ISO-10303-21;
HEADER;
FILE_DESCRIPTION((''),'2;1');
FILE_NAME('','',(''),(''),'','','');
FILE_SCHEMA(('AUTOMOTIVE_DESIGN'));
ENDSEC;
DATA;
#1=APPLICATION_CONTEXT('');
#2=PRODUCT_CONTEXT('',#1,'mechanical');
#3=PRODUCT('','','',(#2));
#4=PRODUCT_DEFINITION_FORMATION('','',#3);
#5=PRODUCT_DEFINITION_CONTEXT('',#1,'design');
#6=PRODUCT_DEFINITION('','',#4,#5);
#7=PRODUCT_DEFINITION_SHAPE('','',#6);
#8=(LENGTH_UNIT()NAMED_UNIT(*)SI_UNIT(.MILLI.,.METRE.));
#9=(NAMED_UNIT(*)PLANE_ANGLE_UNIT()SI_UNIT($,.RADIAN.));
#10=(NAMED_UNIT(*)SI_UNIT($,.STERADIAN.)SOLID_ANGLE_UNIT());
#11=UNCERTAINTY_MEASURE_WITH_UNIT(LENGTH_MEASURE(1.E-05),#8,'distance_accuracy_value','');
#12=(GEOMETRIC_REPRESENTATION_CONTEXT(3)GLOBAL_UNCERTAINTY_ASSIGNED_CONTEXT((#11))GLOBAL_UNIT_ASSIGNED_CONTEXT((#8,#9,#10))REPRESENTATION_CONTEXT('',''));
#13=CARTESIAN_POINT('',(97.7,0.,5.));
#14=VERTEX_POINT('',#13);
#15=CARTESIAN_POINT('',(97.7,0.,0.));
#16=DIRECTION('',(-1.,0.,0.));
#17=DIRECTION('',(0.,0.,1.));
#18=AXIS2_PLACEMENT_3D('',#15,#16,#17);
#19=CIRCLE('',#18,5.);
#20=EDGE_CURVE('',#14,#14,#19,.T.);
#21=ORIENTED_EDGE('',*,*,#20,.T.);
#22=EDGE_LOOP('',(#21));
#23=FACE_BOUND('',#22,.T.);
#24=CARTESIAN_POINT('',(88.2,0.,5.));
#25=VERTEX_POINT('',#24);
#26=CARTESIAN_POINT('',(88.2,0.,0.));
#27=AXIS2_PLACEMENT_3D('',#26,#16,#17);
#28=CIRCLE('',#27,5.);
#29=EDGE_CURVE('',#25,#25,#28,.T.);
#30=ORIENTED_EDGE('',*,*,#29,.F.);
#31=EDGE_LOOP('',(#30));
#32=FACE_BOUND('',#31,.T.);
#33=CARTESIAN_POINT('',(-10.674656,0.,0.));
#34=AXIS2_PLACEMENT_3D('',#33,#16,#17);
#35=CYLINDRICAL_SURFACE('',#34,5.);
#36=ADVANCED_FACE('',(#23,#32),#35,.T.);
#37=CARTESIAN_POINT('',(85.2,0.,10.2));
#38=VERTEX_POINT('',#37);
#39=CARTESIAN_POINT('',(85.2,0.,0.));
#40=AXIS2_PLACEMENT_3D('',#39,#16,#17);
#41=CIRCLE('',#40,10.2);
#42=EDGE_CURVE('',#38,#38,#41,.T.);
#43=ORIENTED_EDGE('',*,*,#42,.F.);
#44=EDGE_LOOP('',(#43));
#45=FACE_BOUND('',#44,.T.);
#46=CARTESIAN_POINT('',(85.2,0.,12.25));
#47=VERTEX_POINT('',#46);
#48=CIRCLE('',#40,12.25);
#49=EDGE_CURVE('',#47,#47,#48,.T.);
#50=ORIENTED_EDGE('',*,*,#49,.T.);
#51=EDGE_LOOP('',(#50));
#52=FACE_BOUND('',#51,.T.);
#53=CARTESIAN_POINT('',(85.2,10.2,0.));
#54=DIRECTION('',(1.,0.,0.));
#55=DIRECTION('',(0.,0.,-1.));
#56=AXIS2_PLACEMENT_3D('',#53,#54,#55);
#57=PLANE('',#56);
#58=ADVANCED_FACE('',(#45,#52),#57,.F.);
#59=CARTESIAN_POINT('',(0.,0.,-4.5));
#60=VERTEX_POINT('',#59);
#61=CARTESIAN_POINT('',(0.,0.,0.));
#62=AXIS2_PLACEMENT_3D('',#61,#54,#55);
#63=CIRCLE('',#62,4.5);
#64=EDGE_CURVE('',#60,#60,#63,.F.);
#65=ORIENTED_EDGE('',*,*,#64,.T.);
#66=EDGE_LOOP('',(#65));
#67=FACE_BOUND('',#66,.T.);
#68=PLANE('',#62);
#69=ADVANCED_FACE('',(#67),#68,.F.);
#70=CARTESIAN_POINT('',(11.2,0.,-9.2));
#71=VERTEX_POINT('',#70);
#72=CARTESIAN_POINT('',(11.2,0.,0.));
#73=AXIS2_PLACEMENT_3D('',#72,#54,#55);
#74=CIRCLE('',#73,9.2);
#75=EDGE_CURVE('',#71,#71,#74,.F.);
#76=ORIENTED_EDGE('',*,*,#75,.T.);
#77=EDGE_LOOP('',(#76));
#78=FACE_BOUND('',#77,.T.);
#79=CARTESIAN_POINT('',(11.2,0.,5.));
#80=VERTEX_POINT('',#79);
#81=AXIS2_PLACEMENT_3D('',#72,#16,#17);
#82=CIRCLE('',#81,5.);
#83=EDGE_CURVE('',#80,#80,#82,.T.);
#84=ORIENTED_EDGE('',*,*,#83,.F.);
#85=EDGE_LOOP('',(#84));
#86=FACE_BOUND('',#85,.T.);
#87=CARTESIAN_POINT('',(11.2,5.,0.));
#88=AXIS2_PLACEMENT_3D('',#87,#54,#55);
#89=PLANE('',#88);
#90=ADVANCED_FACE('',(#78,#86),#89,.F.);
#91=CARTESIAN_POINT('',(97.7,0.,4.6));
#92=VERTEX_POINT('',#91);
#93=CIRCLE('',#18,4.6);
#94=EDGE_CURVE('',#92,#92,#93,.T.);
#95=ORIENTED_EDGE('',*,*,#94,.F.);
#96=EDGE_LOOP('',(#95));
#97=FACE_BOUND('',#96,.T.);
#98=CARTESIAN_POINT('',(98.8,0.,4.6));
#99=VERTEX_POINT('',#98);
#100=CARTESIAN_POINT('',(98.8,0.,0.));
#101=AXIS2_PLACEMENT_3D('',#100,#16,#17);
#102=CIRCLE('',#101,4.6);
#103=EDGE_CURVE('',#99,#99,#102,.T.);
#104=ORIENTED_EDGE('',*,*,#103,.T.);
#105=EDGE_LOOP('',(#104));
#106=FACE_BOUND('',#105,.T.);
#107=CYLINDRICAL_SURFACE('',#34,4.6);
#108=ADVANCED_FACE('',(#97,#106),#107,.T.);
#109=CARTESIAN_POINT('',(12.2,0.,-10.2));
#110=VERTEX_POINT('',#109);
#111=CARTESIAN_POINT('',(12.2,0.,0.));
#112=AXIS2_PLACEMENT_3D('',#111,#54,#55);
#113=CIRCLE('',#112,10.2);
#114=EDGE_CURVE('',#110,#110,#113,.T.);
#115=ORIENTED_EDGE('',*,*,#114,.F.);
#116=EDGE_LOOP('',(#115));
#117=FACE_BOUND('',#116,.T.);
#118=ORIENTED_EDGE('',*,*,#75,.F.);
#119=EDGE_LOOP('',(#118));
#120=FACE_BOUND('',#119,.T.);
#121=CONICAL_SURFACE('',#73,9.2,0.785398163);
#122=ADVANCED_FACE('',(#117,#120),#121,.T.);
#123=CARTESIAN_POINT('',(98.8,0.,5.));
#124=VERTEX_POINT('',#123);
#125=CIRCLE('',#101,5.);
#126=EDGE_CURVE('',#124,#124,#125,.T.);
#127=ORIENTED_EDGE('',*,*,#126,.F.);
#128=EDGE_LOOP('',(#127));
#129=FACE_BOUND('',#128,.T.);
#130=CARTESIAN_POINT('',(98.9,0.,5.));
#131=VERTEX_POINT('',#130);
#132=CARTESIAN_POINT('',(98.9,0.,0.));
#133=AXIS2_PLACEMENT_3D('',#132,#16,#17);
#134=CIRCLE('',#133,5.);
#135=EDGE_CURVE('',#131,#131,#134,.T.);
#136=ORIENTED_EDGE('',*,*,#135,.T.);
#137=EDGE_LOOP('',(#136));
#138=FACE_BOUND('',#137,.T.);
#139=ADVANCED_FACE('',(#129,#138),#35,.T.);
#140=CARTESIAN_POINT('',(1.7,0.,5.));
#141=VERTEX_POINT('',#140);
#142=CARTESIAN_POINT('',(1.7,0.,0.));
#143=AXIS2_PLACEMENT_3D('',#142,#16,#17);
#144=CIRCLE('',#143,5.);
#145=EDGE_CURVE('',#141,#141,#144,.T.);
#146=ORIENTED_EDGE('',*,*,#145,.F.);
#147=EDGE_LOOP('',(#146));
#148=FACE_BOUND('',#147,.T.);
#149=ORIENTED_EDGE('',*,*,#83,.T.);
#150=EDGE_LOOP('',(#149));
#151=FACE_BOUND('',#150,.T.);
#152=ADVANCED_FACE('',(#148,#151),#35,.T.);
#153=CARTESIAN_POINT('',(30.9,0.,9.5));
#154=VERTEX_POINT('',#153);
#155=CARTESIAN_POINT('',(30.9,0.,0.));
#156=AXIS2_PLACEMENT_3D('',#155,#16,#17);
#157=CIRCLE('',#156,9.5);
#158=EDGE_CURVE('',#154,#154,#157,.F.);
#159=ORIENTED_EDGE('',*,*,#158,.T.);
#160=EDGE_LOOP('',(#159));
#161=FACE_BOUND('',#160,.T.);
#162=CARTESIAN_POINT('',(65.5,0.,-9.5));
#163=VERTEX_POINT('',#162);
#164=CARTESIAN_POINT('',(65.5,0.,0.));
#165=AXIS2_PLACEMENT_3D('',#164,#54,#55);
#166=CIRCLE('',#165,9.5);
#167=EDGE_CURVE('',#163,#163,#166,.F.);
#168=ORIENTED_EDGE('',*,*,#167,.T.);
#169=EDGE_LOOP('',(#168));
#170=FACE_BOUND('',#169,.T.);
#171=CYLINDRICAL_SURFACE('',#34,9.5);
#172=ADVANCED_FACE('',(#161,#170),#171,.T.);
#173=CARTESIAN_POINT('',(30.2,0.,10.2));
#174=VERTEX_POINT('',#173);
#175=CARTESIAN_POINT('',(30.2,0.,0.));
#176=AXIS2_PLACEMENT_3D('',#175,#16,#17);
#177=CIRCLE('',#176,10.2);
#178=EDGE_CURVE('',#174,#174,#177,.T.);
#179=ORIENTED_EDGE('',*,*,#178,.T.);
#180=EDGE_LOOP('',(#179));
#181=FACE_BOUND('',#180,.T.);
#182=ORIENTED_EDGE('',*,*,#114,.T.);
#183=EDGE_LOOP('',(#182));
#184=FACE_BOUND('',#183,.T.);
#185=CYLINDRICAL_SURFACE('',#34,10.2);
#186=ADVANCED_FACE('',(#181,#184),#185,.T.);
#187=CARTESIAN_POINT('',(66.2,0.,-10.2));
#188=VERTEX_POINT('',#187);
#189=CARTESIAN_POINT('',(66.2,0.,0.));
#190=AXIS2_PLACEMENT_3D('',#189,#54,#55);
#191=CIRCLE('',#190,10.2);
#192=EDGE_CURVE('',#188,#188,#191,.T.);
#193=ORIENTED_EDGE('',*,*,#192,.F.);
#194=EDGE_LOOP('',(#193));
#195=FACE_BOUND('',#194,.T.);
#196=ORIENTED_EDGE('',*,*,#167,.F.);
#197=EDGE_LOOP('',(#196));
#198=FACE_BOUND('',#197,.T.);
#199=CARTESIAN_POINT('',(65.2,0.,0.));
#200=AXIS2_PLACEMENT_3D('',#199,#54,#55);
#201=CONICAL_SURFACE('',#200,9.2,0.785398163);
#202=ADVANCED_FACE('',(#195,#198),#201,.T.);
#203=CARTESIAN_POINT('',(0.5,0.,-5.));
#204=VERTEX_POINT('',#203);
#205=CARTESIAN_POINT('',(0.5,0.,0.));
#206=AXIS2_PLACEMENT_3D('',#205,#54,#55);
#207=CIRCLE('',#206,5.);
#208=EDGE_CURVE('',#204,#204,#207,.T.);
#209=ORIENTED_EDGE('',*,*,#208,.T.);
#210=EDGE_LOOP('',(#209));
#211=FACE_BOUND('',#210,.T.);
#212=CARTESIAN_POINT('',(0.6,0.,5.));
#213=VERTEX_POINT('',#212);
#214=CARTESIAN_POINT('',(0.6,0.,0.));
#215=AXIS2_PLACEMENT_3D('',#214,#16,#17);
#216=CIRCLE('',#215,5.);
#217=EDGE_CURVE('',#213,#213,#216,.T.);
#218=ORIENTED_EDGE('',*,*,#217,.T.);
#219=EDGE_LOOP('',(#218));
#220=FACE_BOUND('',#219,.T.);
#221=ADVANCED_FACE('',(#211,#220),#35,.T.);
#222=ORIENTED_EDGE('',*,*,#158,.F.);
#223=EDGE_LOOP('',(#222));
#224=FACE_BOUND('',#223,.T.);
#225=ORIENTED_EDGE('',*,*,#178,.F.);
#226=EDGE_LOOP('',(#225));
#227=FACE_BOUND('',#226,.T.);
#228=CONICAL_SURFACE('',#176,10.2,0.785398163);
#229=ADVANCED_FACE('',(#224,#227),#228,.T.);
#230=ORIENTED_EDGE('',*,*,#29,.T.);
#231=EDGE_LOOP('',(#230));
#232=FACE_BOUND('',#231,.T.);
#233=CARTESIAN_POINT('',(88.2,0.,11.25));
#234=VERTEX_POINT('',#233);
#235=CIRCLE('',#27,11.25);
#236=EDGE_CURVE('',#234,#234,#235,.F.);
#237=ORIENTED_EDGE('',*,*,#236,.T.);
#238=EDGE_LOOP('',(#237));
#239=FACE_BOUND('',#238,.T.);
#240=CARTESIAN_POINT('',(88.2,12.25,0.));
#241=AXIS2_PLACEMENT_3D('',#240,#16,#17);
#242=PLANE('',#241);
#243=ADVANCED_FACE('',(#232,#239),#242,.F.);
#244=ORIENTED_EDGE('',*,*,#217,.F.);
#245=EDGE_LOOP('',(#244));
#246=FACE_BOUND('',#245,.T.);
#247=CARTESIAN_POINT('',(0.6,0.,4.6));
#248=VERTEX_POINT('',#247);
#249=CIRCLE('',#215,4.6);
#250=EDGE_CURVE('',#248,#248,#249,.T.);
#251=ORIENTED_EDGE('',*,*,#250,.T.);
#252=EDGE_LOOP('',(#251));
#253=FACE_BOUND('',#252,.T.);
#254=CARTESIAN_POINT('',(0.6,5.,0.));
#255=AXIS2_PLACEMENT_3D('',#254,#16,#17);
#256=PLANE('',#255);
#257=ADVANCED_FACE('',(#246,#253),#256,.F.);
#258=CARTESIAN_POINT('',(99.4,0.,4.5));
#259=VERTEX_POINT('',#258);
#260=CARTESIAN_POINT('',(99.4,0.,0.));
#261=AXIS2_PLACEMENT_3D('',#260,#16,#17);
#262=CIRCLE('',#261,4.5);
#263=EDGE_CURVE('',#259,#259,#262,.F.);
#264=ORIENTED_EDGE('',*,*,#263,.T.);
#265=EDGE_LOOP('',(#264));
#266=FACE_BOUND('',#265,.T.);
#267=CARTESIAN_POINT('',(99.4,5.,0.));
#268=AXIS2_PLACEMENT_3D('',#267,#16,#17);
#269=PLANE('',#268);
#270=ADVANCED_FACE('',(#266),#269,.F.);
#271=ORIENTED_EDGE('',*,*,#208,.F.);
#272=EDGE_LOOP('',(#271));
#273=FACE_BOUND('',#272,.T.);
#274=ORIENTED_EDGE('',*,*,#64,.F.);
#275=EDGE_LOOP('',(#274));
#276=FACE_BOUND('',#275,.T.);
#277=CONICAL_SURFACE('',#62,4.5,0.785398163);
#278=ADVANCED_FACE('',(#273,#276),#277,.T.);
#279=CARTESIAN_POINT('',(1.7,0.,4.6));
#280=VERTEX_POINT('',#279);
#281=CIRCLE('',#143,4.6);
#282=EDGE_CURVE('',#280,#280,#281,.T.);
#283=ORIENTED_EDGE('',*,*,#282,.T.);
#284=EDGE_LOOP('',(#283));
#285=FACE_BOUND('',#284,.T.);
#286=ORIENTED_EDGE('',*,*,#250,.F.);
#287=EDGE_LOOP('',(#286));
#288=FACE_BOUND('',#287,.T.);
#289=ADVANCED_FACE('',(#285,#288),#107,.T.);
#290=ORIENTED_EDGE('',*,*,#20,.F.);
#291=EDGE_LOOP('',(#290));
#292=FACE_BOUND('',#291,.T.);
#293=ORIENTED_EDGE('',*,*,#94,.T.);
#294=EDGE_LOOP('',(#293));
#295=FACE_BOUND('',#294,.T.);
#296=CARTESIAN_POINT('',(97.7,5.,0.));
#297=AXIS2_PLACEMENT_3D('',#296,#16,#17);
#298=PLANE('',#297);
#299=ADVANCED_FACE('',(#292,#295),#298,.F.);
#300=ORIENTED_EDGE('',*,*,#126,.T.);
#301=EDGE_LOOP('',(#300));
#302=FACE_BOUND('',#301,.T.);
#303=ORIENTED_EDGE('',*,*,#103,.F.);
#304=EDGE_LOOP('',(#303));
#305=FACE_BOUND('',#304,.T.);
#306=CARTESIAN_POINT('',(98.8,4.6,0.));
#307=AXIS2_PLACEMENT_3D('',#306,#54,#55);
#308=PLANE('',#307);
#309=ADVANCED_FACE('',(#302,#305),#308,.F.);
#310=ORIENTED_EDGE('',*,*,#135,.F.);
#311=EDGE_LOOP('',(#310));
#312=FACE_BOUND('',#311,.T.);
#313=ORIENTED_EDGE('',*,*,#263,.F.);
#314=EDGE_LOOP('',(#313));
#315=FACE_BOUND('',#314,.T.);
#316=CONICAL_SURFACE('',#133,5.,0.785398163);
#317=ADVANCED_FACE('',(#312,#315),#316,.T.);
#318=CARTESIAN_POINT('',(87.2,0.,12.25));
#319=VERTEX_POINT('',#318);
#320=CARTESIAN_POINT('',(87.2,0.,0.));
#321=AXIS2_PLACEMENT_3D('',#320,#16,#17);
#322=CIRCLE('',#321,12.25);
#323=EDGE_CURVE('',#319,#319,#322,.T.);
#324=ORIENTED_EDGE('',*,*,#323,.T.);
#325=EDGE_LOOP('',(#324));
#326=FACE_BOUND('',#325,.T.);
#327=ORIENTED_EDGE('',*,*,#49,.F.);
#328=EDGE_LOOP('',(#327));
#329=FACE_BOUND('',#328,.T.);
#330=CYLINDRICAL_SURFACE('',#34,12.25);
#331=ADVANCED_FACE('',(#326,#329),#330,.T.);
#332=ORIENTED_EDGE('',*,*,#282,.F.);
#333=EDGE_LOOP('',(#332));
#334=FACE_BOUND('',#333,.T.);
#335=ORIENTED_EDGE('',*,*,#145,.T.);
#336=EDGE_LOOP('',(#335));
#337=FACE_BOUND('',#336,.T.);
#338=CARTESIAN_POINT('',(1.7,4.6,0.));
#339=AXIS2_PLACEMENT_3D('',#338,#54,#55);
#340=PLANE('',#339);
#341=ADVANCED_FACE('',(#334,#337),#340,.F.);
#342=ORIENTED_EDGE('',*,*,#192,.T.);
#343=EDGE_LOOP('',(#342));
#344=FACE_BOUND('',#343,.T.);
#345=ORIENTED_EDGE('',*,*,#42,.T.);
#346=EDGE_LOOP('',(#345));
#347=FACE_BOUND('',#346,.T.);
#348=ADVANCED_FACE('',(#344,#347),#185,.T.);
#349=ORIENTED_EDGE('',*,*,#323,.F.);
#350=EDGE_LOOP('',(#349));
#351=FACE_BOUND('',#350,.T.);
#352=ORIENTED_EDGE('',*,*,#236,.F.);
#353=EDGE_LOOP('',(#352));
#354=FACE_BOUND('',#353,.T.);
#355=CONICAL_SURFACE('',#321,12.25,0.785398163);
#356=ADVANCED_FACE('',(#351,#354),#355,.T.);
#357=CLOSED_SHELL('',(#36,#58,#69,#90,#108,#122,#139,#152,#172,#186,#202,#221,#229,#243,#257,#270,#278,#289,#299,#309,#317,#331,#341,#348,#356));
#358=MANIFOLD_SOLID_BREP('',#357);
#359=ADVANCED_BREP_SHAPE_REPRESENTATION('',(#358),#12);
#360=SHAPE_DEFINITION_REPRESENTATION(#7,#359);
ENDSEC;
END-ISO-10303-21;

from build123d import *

# Parameters (mm, degrees)
SFAZOWANIE1_SIZE = 1
SFAZOWANIE2_SIZE = 0.5


with BuildPart() as part:
    # Szkic1 → Obrót1 (revolve)
    with BuildSketch(Plane.XY, mode=Mode.PRIVATE) as obr_t1_sk:
        Polygon((0, 0), (0, 5), (0.6, 5), (0.6, 4.6), (1.7, 4.6), (1.7, 5), (11.2, 5), (11.2, 10.2), (31.2, 10.2), (31.2, 9.5), (65.2, 9.5), (65.2, 10.2), (85.2, 10.2), (85.2, 12.25), (88.2, 12.25), (88.2, 5), (97.7, 5), (97.7, 4.6), (98.8, 4.6), (98.8, 5), (99.4, 5), (99.4, 0), align=None)
    revolve(obr_t1_sk.sketch.rotate(Axis((-10.674656103, 0, 0), (1, 0, 0)), 90), axis=Axis((-10.674656103, 0, 0), (1, 0, 0)))

    # Sfazowanie1
    # the kernel refuses this chamfer: 1 mm, written as the material it takes off along each edge
    with BuildSketch(Plane(origin=(65.2, 0, 0), x_dir=(0, 0, 1), z_dir=(0, 1, 0))) as sfazowanie1_piece_1_section:
        Polygon((10.2 - SFAZOWANIE1_SIZE, 0), (10.2, SFAZOWANIE1_SIZE), (10.2, 0), align=None)
    sfazowanie1_piece_1 = revolve(axis=Axis((65.2, 0, 0), (1, 0, 0)), mode=Mode.PRIVATE)
    sfazowanie1_piece_1 = sfazowanie1_piece_1 - Plane(origin=(65.841981052, 0, 0), x_dir=(0, 0, 1), z_dir=(1, 0, 0)) * Cylinder(9.5, 41, mode=Mode.PRIVATE)
    add(sfazowanie1_piece_1, mode=Mode.SUBTRACT)
    with BuildSketch(Plane(origin=(31.2, 0, 0), x_dir=(0, 0, 1), z_dir=(0, 1, 0))) as sfazowanie1_piece_2_section:
        Polygon((10.2, -SFAZOWANIE1_SIZE), (10.2 - SFAZOWANIE1_SIZE, 0), (10.2, 0), align=None)
    sfazowanie1_piece_2 = revolve(axis=Axis((31.2, 0, 0), (1, 0, 0)), mode=Mode.PRIVATE)
    sfazowanie1_piece_2 = sfazowanie1_piece_2 - Plane(origin=(30.558018948, 0, 0), x_dir=(0, 0, 1), z_dir=(1, 0, 0)) * Cylinder(9.5, 41, mode=Mode.PRIVATE)
    add(sfazowanie1_piece_2, mode=Mode.SUBTRACT)
    with BuildSketch(Plane(origin=(88.2, 0, 0), x_dir=(0, 0, 1), z_dir=(0, 1, 0))) as sfazowanie1_piece_3:
        Polygon((12.25, -SFAZOWANIE1_SIZE), (12.25 - SFAZOWANIE1_SIZE, 0), (12.25, 0), align=None)
    revolve(axis=Axis((88.2, 0, 0), (1, 0, 0)), mode=Mode.SUBTRACT)
    with BuildSketch(Plane(origin=(11.2, 0, 0), x_dir=(0, 0, 1), z_dir=(0, 1, 0))) as sfazowanie1_piece_4:
        Polygon((10.2 - SFAZOWANIE1_SIZE, 0), (10.2, SFAZOWANIE1_SIZE), (10.2, 0), align=None)
    revolve(axis=Axis((11.2, 0, 0), (1, 0, 0)), mode=Mode.SUBTRACT)

    # Sfazowanie2
    sfazowanie2_edges = [part.edges().sort_by_distance(p)[0] for p in [
        (99.4, 0, -5),
        (0, 0, -5),
    ]]
    chamfer(sfazowanie2_edges, length=SFAZOWANIE2_SIZE)


solid = part.part
